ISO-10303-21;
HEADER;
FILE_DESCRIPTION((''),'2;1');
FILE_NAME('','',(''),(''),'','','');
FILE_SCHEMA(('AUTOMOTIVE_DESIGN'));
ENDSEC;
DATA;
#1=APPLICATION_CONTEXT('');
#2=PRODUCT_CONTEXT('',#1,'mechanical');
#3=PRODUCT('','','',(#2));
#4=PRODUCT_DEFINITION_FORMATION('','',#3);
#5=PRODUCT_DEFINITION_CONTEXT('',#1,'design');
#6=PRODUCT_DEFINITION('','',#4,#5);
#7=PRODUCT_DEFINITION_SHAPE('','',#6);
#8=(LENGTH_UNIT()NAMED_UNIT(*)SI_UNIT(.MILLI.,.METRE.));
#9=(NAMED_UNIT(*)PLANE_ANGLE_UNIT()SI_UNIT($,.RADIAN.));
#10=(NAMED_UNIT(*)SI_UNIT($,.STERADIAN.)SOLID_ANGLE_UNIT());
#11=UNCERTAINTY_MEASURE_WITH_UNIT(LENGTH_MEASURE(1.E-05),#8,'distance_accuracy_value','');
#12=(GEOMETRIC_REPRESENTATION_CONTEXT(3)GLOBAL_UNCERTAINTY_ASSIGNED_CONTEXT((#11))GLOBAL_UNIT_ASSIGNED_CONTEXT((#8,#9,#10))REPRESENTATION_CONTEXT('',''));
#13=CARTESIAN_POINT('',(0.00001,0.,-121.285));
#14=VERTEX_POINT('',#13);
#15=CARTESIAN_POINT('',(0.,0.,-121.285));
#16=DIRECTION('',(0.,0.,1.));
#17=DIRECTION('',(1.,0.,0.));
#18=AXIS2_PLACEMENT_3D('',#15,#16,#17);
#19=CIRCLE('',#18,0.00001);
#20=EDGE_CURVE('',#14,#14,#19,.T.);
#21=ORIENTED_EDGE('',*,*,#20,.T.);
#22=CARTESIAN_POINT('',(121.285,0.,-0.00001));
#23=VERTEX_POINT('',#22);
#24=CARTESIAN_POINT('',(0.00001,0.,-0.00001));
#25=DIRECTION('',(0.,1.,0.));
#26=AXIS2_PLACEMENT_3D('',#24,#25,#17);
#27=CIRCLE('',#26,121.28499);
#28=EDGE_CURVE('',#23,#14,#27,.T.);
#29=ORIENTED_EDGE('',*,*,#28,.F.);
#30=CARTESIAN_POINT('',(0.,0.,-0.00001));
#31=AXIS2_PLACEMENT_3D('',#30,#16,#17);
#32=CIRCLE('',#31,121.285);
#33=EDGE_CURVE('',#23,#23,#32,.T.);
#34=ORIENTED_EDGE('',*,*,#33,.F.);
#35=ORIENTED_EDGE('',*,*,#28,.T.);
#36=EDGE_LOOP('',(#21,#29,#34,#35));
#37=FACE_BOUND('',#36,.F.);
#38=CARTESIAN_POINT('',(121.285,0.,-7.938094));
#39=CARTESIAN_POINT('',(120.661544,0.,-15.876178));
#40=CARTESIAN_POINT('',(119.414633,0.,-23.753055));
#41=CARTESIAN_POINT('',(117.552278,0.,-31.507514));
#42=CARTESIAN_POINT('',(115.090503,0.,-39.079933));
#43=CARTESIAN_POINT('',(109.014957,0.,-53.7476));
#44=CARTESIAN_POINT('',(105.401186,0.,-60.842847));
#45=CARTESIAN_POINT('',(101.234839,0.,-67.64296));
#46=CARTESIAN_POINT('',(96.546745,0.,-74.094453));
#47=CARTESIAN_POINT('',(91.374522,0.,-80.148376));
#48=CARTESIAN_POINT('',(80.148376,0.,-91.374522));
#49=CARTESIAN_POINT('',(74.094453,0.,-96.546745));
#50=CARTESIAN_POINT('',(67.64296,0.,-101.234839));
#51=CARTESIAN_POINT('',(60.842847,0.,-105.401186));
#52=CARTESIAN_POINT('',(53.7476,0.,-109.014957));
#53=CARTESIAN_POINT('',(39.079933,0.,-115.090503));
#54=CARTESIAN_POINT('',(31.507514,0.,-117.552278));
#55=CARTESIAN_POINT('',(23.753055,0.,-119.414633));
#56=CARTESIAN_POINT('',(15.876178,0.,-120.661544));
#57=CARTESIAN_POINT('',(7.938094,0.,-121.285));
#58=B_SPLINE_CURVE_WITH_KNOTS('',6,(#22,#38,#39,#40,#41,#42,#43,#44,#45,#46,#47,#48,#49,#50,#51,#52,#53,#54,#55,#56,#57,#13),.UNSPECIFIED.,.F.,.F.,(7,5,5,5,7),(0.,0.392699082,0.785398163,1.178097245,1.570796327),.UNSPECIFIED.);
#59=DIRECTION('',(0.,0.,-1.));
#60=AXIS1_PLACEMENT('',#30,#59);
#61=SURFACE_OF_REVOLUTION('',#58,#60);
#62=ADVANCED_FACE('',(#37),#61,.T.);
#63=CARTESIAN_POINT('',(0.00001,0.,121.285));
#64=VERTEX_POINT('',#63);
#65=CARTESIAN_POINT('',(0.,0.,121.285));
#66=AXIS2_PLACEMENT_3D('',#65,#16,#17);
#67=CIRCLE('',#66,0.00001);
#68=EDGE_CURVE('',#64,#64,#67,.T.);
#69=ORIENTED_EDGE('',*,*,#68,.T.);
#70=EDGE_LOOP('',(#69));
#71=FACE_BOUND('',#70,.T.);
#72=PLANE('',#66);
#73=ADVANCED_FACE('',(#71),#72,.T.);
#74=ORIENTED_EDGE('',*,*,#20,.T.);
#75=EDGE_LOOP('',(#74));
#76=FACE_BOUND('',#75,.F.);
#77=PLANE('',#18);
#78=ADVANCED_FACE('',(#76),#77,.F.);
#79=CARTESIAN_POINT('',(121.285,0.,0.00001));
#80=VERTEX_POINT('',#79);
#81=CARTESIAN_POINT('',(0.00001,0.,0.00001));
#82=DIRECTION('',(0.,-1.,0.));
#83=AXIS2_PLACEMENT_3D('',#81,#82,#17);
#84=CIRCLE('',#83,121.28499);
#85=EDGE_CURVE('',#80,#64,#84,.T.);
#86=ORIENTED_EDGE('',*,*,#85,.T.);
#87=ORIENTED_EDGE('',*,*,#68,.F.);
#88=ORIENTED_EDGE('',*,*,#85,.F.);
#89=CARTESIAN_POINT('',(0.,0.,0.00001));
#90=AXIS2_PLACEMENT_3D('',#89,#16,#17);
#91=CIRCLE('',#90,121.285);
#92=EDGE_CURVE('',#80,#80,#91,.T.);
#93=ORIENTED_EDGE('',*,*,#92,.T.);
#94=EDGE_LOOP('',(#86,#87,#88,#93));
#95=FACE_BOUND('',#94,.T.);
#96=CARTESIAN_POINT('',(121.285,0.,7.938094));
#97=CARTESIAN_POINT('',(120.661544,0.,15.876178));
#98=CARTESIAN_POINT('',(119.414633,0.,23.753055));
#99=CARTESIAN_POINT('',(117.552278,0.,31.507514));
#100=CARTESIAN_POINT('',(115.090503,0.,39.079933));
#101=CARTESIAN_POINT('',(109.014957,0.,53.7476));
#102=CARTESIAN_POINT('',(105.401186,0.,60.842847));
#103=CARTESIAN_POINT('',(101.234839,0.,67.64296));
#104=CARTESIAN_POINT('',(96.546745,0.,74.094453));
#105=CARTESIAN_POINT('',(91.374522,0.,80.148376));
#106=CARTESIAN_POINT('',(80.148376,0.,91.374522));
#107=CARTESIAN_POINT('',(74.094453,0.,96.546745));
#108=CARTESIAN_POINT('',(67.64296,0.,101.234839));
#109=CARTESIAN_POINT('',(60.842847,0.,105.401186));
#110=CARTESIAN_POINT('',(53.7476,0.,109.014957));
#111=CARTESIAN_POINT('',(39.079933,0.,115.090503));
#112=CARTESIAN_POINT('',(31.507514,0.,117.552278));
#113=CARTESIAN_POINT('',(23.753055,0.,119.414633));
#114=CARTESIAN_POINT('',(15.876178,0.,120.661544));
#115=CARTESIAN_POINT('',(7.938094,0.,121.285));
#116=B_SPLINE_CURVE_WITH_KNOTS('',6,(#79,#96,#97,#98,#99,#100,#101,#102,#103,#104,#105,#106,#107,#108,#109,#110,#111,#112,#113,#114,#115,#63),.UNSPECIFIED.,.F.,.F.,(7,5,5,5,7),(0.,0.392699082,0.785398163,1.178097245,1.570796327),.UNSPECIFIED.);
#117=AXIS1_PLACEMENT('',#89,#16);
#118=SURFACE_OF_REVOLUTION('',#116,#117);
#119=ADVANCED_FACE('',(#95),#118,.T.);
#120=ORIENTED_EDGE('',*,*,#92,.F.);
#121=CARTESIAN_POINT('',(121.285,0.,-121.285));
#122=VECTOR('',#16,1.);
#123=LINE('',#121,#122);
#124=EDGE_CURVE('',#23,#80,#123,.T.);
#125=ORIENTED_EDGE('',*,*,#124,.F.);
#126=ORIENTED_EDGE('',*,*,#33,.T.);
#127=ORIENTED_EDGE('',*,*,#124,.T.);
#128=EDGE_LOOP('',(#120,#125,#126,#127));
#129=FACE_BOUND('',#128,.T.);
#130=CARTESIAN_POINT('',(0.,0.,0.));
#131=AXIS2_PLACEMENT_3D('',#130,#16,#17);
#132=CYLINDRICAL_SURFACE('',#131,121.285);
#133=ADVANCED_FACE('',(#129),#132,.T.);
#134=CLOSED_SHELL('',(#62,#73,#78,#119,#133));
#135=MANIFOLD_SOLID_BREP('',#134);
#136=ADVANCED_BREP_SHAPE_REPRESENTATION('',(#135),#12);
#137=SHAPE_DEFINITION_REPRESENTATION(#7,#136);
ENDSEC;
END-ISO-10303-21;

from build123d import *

# Parameters (mm, degrees)
F0_R          = 121.285
F1_DEPTH      = 121.285
F1_DEPTH_BACK = 121.285
F2_R          = 121.28499


# Not quite as in the source:
# - a fillet or chamfer is up to 0.001 mm smaller than in the source, because OpenCascade refuses the exact size


with BuildPart() as f1:
    # F0 (on Top) → F1 (new body, two sides)
    with BuildSketch(Plane.XY) as f1_sk:
        Circle(F0_R)
    extrude(amount=F1_DEPTH)
    extrude(f1_sk.sketch, amount=-F1_DEPTH_BACK)

    # F2 (radius 121.285 in the source; OpenCascade refuses exactly that, so slightly less here)
    f2_edges = [f1.edges().sort_by_distance(p)[0] for p in [
        (-121.285, 0, 121.285),
        (-121.285, 0, -121.285),
    ]]
    fillet(f2_edges, radius=F2_R)


solid = f1.part
